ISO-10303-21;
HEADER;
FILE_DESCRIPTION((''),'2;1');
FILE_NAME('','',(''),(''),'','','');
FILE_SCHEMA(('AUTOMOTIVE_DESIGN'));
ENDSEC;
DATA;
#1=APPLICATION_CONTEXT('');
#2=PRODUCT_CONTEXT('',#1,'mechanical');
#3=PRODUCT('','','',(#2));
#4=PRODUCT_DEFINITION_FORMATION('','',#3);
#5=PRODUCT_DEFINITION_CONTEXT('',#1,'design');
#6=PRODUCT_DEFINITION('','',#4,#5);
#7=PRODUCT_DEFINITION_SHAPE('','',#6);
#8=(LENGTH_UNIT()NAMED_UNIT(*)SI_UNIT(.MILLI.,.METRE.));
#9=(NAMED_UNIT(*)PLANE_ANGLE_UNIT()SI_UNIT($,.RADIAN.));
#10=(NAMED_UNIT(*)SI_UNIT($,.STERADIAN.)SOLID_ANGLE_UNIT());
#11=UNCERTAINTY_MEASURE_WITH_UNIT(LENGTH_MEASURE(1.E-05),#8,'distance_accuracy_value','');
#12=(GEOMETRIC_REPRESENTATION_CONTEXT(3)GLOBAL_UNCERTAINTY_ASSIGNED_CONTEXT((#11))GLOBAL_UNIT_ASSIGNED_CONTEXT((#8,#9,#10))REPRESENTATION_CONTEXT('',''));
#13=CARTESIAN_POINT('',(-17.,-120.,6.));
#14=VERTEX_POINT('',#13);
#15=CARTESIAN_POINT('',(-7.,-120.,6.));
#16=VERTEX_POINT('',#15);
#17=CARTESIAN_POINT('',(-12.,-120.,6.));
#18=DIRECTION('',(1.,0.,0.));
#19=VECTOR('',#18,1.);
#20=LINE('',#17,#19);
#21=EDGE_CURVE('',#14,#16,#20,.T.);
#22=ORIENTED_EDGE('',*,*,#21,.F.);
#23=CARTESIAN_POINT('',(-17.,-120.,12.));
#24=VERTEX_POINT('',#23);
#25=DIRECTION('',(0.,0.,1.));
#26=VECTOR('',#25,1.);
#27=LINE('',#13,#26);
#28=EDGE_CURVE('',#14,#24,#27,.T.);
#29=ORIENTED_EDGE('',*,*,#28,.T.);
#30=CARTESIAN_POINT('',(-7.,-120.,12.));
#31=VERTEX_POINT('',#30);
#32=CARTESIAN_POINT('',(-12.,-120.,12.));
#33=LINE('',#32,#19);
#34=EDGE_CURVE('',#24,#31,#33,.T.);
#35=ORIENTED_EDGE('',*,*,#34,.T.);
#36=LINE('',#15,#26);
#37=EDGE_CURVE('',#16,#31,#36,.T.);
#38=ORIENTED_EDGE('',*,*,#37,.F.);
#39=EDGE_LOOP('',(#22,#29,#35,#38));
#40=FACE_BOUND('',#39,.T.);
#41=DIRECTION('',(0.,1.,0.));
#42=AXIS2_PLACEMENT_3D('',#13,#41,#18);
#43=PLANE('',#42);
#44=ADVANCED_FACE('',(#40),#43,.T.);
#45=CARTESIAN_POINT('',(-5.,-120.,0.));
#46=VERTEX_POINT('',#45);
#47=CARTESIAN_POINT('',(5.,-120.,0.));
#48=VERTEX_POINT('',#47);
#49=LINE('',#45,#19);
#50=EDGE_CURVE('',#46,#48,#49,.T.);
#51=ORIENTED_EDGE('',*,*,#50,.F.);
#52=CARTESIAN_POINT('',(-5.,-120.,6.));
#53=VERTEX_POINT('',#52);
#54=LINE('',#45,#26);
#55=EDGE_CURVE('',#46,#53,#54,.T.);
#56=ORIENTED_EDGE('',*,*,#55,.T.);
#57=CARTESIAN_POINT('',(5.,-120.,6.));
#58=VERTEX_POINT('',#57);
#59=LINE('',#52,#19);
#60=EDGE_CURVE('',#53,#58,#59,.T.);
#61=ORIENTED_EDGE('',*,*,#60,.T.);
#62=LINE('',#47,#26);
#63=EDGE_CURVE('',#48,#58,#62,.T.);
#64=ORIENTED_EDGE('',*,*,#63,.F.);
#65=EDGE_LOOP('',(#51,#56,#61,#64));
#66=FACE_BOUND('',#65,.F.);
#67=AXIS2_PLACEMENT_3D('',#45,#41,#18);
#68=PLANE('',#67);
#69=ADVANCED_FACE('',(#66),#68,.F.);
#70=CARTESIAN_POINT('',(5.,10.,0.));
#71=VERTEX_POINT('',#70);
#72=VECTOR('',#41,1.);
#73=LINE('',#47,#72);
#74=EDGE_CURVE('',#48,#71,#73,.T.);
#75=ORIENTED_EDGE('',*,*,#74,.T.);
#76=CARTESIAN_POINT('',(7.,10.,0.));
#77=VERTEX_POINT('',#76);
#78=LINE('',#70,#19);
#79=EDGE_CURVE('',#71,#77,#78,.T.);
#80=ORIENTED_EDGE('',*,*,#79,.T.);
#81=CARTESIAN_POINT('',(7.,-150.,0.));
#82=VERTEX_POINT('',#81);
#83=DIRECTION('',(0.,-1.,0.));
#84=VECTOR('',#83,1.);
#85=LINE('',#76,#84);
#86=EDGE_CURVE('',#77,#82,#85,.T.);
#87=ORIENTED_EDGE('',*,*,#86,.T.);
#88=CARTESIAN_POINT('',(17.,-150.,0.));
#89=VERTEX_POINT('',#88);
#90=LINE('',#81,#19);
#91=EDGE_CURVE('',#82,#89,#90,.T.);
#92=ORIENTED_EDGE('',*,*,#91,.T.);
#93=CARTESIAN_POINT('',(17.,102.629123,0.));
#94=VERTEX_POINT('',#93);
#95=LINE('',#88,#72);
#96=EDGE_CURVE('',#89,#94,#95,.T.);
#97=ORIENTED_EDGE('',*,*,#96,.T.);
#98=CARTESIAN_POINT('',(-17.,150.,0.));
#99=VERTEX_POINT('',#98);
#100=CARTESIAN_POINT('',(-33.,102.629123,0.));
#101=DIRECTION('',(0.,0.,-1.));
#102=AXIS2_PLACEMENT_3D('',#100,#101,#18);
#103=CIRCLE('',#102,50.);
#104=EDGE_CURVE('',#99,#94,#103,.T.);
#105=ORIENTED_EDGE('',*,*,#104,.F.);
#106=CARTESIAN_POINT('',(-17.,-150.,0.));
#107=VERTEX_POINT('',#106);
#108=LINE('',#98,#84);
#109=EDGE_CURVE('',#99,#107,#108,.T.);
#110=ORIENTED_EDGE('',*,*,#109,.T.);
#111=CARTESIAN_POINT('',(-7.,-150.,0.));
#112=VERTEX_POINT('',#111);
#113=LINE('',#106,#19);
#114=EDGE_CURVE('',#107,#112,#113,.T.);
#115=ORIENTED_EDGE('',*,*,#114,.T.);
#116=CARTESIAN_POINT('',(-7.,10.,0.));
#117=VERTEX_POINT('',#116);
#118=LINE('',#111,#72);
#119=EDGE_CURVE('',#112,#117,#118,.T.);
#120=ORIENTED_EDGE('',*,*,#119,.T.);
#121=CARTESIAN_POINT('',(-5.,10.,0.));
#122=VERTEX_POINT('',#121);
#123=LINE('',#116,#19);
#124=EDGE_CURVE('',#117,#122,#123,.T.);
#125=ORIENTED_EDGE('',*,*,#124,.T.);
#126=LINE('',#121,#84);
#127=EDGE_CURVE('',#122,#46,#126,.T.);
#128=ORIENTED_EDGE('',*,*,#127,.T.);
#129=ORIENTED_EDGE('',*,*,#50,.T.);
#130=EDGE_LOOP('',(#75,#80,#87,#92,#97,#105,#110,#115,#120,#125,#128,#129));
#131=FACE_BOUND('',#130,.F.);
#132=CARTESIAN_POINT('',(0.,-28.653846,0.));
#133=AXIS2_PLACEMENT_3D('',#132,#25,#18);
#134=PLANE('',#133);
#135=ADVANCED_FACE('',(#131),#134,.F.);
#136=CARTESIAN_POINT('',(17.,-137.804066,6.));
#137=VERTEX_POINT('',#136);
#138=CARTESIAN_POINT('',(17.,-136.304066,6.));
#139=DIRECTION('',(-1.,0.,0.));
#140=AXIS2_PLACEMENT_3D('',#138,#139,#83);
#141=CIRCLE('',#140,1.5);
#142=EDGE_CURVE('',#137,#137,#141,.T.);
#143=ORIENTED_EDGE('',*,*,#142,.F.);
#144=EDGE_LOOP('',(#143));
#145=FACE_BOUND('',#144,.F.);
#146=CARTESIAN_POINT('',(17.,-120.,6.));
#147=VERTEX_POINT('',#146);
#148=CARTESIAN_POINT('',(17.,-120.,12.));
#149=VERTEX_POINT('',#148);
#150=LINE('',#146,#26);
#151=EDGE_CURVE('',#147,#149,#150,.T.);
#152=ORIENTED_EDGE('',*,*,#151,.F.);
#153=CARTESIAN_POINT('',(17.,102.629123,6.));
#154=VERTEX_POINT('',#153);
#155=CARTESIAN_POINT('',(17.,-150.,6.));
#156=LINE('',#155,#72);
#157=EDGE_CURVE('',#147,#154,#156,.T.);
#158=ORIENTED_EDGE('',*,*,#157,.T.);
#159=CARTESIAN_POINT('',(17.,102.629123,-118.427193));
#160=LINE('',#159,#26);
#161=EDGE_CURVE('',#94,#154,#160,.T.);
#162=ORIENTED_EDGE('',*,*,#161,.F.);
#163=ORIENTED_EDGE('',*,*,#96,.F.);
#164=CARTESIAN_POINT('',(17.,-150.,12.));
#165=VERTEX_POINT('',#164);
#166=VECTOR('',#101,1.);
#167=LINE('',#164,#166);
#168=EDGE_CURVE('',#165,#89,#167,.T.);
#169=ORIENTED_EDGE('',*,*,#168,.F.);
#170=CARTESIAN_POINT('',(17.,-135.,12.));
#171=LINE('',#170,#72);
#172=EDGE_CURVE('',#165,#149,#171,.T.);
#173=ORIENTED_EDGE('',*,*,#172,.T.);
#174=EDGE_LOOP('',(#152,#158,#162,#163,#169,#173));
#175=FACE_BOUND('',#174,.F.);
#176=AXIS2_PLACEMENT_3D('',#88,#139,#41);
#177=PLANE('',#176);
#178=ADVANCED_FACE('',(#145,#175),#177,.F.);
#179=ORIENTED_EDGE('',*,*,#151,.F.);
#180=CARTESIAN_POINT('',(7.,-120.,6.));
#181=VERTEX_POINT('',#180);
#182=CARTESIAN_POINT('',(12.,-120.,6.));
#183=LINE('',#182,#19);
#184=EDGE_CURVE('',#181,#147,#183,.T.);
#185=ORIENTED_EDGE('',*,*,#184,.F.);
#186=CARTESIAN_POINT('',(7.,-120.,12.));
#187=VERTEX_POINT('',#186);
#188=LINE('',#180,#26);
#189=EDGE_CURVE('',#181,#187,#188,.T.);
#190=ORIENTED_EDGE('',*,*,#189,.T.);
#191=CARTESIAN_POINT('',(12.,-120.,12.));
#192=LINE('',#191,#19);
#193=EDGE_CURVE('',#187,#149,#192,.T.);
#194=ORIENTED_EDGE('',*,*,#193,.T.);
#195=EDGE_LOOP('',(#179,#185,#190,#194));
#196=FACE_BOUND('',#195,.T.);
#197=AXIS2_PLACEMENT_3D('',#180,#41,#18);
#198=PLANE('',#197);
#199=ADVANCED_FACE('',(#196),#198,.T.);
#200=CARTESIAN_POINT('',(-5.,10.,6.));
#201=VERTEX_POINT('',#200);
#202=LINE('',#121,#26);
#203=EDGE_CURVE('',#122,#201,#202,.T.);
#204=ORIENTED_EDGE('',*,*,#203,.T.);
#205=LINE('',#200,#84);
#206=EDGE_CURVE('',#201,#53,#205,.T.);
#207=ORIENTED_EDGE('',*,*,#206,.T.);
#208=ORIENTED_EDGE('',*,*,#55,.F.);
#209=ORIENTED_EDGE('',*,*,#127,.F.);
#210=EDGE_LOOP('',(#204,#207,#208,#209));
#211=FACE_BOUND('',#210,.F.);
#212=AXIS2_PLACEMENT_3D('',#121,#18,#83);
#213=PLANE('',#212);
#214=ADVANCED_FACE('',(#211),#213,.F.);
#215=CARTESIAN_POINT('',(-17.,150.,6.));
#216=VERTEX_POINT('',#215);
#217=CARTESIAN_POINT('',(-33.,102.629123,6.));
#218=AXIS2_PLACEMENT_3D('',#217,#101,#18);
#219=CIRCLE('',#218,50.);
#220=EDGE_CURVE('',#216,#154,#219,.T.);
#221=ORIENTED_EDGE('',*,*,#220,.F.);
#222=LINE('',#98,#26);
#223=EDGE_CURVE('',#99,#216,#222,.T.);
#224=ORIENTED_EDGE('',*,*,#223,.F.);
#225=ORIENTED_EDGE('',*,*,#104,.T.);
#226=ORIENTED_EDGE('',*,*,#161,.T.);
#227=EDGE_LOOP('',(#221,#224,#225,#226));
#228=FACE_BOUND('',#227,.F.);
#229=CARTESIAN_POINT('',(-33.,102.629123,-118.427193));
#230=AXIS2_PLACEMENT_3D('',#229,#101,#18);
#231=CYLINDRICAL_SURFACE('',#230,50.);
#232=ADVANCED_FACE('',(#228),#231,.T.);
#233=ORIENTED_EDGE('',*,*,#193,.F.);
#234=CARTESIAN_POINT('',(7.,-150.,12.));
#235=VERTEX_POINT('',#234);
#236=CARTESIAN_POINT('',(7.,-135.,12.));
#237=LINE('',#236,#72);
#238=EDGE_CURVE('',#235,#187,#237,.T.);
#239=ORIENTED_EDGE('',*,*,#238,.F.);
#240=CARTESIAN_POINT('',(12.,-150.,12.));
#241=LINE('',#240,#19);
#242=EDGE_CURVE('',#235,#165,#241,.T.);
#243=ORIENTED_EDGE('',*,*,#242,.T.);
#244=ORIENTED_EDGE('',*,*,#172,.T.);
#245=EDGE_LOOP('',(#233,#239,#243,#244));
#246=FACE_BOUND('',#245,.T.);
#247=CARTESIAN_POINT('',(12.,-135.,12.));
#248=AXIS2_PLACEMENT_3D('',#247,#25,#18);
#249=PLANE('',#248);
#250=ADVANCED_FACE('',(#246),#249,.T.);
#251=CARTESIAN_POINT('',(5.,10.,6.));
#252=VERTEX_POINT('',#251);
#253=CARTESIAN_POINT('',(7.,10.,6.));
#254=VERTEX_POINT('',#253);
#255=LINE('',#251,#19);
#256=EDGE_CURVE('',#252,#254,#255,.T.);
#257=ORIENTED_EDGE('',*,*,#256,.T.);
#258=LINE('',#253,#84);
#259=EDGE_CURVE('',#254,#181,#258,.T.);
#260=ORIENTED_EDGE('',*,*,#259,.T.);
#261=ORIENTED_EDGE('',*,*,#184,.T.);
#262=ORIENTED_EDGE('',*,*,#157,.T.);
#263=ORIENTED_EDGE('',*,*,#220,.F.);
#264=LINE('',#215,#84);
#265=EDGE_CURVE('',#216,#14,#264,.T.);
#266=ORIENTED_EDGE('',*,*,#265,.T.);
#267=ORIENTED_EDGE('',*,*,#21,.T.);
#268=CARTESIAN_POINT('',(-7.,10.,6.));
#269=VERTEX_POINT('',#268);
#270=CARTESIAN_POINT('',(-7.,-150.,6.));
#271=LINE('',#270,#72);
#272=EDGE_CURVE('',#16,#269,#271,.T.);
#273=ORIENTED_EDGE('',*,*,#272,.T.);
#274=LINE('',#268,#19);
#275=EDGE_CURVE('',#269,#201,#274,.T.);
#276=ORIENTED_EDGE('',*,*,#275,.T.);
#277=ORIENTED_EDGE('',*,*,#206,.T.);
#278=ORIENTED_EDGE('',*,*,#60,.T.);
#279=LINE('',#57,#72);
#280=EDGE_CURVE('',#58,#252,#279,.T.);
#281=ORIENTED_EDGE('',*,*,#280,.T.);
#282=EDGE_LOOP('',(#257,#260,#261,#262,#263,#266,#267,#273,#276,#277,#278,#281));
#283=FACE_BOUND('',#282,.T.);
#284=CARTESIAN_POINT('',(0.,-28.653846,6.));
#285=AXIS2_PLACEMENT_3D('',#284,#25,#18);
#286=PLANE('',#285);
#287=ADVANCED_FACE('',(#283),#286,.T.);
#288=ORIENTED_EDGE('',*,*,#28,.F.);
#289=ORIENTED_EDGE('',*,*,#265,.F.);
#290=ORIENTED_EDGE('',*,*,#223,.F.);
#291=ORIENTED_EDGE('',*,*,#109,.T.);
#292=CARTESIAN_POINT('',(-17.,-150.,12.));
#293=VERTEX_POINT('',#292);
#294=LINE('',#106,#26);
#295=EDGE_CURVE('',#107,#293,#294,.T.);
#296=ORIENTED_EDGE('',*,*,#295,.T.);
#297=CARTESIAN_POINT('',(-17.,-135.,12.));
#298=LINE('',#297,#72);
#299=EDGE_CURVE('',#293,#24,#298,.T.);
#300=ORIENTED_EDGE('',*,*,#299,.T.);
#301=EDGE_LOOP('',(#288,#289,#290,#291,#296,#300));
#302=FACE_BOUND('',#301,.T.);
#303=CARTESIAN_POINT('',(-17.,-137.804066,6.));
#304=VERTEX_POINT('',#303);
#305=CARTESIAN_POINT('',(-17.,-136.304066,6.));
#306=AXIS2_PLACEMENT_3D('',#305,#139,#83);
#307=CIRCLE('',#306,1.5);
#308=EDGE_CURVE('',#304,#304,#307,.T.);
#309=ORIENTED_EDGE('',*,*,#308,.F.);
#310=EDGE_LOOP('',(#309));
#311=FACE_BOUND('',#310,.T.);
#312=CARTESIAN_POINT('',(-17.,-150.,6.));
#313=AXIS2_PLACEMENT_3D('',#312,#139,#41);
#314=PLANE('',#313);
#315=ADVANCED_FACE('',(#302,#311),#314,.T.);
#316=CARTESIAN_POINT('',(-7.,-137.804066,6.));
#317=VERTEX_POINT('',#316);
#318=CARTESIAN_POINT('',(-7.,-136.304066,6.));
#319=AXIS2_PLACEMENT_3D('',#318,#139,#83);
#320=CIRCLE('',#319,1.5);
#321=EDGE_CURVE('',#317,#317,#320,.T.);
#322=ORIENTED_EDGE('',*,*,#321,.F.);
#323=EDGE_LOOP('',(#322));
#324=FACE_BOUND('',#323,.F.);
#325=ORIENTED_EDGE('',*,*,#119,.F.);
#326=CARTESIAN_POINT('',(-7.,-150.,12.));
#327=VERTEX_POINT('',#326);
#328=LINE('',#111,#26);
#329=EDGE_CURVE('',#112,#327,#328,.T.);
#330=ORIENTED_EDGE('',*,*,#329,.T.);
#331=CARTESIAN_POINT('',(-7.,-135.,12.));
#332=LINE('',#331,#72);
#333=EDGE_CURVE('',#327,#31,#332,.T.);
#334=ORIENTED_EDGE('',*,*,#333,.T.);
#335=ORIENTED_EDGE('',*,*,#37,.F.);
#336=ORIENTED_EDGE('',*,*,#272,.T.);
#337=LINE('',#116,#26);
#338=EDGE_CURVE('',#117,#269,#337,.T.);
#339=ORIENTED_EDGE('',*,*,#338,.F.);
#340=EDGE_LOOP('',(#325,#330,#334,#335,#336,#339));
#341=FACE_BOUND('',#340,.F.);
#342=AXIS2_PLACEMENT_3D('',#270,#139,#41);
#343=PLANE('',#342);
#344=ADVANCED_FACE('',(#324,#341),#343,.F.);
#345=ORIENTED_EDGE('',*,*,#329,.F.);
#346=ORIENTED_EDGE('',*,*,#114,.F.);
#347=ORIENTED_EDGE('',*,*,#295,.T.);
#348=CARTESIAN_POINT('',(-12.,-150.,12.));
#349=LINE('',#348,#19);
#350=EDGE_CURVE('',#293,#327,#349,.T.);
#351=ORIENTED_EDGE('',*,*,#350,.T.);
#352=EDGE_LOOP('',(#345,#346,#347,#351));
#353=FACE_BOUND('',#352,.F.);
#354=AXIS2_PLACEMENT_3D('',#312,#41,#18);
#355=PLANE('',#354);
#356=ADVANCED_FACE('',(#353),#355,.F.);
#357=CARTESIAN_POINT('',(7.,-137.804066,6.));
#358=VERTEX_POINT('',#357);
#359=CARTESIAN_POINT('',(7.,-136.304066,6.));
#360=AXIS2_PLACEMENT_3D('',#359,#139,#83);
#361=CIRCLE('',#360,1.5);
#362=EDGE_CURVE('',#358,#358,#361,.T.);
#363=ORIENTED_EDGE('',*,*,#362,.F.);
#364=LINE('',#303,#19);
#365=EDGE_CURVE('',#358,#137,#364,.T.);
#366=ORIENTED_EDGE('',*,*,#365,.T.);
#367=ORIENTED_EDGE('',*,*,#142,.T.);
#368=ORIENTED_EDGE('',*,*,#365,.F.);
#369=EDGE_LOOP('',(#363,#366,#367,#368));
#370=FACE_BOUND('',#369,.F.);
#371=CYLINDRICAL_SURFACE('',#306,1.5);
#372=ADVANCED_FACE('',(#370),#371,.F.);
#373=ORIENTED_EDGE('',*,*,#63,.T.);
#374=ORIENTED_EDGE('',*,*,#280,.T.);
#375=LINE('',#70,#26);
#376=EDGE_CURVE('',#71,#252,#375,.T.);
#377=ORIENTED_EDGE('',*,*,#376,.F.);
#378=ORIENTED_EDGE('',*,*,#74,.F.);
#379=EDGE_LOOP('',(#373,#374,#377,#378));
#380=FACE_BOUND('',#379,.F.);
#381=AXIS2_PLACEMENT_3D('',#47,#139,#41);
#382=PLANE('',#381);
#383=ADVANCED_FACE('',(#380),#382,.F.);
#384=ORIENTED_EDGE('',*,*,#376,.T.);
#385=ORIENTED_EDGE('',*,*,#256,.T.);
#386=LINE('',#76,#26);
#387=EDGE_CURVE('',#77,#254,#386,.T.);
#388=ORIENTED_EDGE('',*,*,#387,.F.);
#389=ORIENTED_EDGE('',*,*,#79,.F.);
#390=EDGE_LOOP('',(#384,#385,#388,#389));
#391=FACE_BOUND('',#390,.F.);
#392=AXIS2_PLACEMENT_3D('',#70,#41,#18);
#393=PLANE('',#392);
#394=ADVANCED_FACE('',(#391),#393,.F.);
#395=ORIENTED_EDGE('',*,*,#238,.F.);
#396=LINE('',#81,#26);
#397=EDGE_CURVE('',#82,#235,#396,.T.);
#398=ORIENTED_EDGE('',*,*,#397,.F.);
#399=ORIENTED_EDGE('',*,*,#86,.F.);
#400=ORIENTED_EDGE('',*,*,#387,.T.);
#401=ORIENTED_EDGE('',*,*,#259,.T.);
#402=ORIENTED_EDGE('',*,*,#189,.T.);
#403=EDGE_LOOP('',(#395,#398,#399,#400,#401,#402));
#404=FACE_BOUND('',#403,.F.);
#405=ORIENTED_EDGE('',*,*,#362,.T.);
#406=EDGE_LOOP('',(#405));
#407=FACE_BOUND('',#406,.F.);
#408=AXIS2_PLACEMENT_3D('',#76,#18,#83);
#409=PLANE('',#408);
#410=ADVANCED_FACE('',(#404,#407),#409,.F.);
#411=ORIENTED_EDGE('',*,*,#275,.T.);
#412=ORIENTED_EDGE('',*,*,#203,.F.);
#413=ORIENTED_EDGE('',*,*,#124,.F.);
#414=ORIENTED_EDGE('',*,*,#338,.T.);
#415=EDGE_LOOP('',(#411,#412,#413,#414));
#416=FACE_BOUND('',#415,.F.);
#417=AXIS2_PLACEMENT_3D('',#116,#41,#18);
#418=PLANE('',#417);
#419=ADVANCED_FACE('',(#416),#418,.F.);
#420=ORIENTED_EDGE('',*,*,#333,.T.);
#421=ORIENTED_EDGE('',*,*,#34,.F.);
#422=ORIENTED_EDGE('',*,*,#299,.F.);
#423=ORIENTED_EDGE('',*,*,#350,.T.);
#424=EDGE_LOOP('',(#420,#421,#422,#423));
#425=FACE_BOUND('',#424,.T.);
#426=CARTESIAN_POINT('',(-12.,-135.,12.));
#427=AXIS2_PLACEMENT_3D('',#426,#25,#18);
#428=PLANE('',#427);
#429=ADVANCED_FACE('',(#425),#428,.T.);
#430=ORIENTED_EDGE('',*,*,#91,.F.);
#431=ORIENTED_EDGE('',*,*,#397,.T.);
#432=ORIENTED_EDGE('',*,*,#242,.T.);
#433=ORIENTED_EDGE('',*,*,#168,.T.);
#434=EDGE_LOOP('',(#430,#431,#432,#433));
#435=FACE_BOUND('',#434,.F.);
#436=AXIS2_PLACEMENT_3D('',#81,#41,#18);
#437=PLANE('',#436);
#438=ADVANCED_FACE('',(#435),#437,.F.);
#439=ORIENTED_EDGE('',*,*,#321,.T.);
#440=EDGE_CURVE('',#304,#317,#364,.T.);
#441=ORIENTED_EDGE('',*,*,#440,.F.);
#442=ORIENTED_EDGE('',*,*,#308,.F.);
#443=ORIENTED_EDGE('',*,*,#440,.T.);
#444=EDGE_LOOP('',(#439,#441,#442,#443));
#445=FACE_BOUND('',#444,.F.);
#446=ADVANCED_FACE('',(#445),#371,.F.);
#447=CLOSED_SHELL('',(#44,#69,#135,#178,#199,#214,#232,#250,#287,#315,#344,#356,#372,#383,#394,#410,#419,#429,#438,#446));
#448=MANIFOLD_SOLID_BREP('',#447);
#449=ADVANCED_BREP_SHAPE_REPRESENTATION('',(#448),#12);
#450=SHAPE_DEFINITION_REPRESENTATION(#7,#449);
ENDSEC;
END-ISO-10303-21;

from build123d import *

# Parameters (mm, degrees)
F1_DEPTH    = 6
F2_W        = 10
F2_H        = 30
F3_DEPTH    = 6
F4_R        = 1.5
F5_DEPTH    = 34.001
F6_T1_DEPTH = 242.8543856465


# Not quite as in the source:
# - a fillet or chamfer that OpenCascade refuses, or shapes differently, is made with other operations: its cross-section is extruded or revolved along the edge and cut away or added


with BuildPart() as f1:
    # F0 (on Top) → F1 (new body)
    with BuildSketch(Plane.XY):
        Polygon((7, -150), (17, -150), (17, 150), (-17, 150), (-17, -150), (-7, -150), (-7, 10), (-5, 10), (-5, -120), (5, -120), (5, 10), (7, 10), align=None)
    extrude(amount=F1_DEPTH)

    # F2 (on face) → F3 (join)
    with BuildSketch(Plane.XY.offset(6)):
        with Locations((-12, -135)):
            Rectangle(F2_W, F2_H)
        with Locations((12, -135)):
            Rectangle(F2_W, F2_H)
    extrude(amount=F3_DEPTH)

    # F4 (on face) → F5 (cut, through all)
    with BuildSketch(Plane(origin=(-17, 0, 0), x_dir=(0, -1, 0), z_dir=(-1, 0, 0))):
        with Locations((136.3040655851, 6)):
            Circle(F4_R)
    extrude(amount=-F5_DEPTH, mode=Mode.SUBTRACT)

    # F6: fillet of radius 50 on 1 edges, made by hand

    # F6_s2 → F6_t1 (cut)
    with BuildSketch(Plane.XY.offset(-118.4271928233)):
        with BuildLine():
            ThreePointArc((17, 102.6291228707), (7.6201920232, 131.7838823449), (-17, 150))
            Line((-17, 150), (17, 150))
            Line((17, 150), (17, 102.6291228707))
        make_face()
    extrude(amount=F6_T1_DEPTH, mode=Mode.SUBTRACT)


solid = f1.part
